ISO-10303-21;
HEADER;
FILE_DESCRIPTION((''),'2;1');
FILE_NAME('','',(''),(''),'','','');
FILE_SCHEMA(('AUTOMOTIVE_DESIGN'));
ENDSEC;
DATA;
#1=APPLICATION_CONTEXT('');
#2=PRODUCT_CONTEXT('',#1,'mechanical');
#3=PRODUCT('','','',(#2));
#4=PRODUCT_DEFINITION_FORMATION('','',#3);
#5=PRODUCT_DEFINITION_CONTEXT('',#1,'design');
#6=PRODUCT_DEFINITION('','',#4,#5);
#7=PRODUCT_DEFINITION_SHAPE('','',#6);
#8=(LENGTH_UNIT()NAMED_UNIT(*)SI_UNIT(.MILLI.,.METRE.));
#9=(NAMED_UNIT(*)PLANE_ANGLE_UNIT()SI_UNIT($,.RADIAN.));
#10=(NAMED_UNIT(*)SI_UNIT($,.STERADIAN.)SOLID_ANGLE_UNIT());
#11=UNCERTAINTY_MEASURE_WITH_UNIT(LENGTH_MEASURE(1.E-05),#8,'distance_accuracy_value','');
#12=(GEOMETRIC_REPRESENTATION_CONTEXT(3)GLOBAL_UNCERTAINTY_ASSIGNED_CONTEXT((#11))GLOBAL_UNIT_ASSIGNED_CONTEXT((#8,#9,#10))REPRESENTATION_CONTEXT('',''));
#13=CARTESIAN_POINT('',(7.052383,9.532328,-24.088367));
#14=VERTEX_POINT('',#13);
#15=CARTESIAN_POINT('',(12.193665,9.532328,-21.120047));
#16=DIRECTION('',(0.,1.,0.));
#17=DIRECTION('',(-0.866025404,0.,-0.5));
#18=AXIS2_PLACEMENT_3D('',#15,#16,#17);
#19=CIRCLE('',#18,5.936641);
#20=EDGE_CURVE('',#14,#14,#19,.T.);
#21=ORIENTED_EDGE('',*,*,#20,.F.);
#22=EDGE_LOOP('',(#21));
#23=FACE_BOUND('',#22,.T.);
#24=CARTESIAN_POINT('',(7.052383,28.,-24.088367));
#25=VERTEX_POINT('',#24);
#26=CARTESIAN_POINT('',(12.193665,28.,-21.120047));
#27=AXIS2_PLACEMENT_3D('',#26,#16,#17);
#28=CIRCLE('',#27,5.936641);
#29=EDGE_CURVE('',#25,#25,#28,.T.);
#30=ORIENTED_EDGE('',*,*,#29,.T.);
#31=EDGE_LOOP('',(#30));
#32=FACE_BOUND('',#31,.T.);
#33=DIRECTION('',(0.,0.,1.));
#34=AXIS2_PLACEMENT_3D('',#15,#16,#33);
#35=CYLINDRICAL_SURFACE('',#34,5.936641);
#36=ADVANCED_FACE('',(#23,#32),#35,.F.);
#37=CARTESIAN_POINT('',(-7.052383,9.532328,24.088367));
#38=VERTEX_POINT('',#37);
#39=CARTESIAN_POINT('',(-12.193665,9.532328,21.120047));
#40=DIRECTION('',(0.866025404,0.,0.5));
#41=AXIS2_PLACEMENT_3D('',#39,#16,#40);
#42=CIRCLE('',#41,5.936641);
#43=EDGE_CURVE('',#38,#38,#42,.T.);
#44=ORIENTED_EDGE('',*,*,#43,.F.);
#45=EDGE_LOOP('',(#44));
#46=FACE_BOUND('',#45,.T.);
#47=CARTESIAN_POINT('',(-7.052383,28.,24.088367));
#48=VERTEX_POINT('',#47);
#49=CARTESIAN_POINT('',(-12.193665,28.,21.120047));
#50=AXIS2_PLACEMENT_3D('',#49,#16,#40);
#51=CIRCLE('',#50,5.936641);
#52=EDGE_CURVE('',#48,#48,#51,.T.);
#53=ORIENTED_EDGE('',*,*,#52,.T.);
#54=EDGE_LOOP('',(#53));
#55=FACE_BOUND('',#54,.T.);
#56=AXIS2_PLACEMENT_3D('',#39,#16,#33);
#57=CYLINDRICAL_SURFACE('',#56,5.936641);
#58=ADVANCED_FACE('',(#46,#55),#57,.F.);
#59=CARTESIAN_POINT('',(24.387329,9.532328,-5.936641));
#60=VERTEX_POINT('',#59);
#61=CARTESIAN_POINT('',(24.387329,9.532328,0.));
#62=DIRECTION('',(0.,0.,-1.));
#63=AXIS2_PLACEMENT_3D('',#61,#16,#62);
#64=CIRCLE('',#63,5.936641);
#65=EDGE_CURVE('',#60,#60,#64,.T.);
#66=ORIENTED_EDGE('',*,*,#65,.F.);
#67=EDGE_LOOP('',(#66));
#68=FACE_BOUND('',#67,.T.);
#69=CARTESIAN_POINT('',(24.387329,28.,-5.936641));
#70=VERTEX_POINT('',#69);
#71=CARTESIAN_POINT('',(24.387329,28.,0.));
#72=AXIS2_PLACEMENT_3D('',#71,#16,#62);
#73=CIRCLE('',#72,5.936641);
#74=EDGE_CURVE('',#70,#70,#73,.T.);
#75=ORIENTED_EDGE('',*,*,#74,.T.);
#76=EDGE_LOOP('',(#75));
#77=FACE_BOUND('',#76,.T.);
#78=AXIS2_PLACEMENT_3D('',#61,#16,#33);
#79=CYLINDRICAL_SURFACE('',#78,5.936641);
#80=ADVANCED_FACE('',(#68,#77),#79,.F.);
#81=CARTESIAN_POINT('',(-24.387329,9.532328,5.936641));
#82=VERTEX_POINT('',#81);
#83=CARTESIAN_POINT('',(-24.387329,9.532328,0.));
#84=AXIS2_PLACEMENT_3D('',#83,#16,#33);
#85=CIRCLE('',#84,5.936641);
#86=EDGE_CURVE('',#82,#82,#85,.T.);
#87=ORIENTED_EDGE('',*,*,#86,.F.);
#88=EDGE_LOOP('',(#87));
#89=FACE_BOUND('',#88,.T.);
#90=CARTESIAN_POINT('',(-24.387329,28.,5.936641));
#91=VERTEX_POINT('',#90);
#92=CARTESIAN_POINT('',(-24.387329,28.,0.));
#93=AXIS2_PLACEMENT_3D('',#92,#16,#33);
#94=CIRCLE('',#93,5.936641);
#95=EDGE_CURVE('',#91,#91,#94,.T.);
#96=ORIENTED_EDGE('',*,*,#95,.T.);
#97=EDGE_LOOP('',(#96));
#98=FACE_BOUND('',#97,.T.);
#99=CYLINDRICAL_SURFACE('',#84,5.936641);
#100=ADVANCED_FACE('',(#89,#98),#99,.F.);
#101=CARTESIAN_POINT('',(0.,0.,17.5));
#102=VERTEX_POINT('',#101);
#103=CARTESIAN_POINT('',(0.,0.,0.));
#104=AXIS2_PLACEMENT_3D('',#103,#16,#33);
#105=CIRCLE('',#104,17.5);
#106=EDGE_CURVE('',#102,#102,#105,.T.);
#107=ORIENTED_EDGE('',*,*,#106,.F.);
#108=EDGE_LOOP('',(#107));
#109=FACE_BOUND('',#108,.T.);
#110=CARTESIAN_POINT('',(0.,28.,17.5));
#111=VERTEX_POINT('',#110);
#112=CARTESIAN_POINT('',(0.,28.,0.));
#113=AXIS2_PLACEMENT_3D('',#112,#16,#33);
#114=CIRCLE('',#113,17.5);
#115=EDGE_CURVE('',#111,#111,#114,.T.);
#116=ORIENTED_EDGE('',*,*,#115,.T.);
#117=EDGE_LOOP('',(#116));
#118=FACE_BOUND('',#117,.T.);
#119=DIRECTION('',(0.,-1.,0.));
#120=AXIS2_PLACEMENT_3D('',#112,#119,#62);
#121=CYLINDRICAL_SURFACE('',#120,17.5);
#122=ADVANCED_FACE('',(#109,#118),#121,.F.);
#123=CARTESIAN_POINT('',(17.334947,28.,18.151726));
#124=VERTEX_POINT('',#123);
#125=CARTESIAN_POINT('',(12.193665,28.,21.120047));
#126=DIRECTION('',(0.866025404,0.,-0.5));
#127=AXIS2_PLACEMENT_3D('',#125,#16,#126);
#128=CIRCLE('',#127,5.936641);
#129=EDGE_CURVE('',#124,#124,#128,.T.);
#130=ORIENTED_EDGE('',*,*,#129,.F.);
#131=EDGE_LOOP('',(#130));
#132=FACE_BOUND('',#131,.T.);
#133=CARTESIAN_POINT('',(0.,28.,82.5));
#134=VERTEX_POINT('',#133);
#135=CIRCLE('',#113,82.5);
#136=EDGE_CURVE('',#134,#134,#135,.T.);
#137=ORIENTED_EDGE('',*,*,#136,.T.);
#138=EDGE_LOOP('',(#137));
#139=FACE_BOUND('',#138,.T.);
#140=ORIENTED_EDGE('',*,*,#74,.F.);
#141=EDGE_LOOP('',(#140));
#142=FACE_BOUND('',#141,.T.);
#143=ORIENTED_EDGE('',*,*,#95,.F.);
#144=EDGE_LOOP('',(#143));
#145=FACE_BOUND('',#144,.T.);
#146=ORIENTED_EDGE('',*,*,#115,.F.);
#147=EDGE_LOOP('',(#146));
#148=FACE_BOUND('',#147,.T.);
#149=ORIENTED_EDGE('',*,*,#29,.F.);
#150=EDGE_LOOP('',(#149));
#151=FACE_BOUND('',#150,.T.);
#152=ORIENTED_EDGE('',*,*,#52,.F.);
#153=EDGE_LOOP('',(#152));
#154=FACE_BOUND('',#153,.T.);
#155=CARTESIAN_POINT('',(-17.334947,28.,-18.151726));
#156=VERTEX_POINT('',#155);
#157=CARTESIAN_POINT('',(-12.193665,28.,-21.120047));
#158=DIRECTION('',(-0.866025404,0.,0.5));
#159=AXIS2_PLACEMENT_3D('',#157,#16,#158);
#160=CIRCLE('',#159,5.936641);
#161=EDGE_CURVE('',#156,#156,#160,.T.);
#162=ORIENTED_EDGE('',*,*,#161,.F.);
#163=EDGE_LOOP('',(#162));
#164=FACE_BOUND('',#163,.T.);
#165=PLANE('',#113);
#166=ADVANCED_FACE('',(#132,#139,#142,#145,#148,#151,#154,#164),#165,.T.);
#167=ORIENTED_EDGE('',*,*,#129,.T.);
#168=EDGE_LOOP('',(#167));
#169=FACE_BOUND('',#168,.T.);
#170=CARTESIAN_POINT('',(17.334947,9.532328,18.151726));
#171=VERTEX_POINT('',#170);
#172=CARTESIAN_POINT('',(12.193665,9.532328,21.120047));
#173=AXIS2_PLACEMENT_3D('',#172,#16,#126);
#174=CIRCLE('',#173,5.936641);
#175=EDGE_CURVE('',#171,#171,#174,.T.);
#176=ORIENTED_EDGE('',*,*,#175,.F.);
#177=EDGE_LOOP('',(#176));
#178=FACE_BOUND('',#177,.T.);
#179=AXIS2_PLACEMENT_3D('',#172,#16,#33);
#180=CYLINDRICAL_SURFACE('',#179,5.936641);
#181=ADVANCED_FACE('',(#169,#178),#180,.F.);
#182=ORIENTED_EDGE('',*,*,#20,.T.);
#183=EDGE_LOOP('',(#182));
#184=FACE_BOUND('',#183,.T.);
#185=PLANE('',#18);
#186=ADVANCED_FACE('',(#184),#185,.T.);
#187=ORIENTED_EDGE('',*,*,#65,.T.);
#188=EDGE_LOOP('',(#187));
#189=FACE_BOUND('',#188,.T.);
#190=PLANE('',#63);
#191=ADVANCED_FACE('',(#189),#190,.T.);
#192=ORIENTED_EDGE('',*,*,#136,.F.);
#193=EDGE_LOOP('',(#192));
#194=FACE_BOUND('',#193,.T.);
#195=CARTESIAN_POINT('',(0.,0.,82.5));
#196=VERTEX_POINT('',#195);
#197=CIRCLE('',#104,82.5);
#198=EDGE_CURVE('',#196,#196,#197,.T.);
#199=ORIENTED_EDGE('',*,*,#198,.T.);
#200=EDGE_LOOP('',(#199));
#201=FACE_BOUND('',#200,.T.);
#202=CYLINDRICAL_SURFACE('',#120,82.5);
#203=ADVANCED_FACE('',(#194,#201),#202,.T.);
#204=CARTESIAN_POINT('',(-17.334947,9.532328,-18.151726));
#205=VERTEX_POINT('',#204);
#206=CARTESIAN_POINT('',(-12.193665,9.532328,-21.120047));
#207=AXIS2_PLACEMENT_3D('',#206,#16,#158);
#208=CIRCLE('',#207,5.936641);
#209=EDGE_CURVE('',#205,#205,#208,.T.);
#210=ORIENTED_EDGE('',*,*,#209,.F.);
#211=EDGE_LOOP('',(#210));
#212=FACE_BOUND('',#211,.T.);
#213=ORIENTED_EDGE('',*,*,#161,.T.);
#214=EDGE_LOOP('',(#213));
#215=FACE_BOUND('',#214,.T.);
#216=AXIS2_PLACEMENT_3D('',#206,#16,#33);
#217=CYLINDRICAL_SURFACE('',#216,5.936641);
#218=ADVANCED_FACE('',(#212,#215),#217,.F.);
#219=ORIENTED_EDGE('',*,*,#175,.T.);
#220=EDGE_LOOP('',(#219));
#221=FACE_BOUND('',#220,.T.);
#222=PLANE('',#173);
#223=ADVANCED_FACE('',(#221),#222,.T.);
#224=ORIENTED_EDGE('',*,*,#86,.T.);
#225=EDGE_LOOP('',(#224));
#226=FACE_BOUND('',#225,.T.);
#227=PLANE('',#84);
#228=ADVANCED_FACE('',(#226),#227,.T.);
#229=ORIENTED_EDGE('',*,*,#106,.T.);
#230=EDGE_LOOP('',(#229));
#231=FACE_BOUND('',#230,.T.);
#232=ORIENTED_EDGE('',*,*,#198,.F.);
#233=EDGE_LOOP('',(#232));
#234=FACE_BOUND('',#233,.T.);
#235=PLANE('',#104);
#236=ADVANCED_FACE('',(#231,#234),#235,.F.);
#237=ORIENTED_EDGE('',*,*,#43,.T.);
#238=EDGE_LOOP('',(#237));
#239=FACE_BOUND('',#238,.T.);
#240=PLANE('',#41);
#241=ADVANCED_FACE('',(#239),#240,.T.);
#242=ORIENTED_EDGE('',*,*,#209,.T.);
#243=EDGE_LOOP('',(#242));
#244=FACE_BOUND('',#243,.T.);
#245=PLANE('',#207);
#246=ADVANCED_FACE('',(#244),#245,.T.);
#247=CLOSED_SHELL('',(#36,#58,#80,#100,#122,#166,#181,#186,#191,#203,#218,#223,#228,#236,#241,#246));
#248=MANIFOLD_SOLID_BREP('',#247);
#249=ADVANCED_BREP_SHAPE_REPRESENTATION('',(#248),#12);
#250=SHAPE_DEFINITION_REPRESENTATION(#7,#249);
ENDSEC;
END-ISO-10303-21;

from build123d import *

# Parameters (mm, degrees)
SKETCH1_R           = 82.5
BOSS_EXTRUDE1_DEPTH = 28
SKETCH2_R           = 17.5
CUT_EXTRUDE1_DEPTH  = 120.98541578
SKETCH3_R           = 5.936641042
CUT_EXTRUDE2_DEPTH  = 18.467672158
CIRPATTERN1_COUNT   = 6


with BuildPart() as part:
    # Sketch1 → Boss-Extrude1 (new body)
    with BuildSketch(Plane(origin=(0, 0, 0), x_dir=(1, 0, 0), z_dir=(0, 1, 0))):
        Circle(SKETCH1_R)
    extrude(amount=BOSS_EXTRUDE1_DEPTH)

    # Sketch2 → Cut-Extrude1 (cut, through all)
    with BuildSketch(Plane(origin=(0, 0, 0), x_dir=(1, 0, 0), z_dir=(0, 1, 0))):
        Circle(SKETCH2_R)
    extrude(amount=CUT_EXTRUDE1_DEPTH, mode=Mode.SUBTRACT)

    # Sketch3 → Cut-Extrude2 (cut)
    with BuildSketch(Plane(origin=(0, 28, 0), x_dir=(1, 0, 0), z_dir=(0, 1, 0))):
        with Locations((-24.387329239, 0)):
            Circle(SKETCH3_R)
    cut_extrude2 = extrude(amount=-CUT_EXTRUDE2_DEPTH, mode=Mode.SUBTRACT)

    # CirPattern1: Cut-Extrude2 ×6 about axis
    cirpattern1_axis = Axis((0, 0, 0), (0, 1, 0))
    for i in range(1, CIRPATTERN1_COUNT):
        add(cut_extrude2.rotate(cirpattern1_axis, i * 360 / CIRPATTERN1_COUNT), mode=Mode.SUBTRACT)


solid = part.part
